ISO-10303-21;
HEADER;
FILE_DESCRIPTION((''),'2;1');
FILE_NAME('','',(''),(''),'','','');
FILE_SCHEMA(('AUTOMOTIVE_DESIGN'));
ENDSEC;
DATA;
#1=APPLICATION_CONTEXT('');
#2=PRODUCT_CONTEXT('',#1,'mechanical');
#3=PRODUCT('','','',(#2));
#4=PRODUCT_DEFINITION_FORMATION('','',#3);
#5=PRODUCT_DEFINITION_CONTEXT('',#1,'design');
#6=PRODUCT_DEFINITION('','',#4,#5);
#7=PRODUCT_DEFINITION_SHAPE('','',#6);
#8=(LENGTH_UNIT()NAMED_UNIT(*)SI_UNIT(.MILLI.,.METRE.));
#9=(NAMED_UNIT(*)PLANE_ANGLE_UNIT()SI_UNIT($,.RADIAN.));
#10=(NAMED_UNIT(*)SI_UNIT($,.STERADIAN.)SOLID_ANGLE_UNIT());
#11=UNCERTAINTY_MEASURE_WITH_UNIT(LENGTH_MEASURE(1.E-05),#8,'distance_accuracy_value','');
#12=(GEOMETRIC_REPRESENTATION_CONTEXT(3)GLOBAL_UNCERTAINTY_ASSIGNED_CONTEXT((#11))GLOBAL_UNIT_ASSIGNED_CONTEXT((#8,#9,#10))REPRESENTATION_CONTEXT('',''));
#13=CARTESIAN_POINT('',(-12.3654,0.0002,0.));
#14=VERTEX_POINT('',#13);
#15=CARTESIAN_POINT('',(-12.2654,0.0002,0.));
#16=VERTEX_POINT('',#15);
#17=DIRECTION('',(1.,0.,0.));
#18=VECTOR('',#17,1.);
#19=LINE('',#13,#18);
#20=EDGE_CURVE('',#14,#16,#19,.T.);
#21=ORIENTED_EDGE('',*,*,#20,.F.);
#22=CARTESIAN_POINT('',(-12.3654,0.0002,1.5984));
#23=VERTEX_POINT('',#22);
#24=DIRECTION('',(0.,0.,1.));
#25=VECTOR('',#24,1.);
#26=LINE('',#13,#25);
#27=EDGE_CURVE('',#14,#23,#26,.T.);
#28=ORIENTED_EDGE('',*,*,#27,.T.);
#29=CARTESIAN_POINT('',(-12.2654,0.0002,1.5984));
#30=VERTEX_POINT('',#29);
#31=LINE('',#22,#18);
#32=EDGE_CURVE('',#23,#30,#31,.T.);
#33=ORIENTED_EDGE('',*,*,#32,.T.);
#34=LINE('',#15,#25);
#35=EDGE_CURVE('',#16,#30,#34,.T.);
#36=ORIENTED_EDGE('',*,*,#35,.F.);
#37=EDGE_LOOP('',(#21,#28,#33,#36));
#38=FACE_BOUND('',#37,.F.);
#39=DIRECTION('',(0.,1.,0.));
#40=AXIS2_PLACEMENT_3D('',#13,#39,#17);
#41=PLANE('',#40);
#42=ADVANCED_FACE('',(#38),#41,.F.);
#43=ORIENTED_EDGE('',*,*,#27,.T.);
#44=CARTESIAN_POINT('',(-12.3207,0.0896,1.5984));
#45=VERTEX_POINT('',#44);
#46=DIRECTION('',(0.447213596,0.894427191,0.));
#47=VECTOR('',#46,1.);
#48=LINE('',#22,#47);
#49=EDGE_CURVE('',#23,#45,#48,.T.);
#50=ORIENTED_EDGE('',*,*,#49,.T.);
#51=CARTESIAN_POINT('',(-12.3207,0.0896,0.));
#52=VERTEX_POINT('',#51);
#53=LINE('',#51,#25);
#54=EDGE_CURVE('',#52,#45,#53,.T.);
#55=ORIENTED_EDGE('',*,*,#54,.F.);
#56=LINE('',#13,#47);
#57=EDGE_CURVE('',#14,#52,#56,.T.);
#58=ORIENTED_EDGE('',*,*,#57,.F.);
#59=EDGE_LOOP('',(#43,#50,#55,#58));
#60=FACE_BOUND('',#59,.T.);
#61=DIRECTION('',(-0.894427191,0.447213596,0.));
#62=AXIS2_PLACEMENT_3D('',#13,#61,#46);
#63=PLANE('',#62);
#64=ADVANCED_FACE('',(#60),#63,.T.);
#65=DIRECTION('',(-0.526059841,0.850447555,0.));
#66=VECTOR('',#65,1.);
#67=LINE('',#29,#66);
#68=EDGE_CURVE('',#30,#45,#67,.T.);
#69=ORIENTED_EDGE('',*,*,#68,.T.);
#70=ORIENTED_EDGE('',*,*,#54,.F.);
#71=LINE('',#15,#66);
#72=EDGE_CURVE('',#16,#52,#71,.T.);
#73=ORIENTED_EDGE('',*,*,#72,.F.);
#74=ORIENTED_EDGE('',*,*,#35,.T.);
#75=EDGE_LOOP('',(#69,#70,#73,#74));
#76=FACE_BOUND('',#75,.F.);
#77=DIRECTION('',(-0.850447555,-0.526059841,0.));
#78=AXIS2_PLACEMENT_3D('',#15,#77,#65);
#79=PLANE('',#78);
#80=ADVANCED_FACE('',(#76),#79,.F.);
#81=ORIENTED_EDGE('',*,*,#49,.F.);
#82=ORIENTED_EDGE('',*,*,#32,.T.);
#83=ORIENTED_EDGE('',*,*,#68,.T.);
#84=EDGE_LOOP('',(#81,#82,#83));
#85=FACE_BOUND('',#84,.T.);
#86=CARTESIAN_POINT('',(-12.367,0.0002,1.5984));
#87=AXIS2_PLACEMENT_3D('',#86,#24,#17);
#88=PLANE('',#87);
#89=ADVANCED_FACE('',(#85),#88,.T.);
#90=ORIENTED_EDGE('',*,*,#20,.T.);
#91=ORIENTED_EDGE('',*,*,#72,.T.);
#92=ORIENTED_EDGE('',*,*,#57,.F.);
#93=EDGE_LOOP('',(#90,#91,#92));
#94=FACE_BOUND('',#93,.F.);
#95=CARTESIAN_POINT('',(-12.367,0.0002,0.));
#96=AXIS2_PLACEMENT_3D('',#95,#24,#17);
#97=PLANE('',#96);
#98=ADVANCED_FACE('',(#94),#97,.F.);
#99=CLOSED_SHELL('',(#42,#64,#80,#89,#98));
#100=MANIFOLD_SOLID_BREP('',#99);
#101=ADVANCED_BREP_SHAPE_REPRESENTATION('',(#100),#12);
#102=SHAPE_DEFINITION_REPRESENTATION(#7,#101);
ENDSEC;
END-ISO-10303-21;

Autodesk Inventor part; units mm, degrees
ref_plane "YZ Plane" through (0, 0, 0) normal (1, 0, 0) x (0, 1, 0)
ref_plane "XZ Plane" through (0, 0, 0) normal (0, 1, 0) x (-1, 0, 0)
ref_plane "XY Plane" through (0, 0, 0) normal (0, 0, 1) x (1, 0, 0)
ref_plane "Plano de trabajo1" through (-12.367, 0.0002, 0) normal (0, 0, 1) x (1, -0.0000342, 0)
sketch "Boceto1" plane through (-12.367, 0.0002, 0) normal (0, 0, 1) x (1, -0.0000342, 0)
  line L0 (0.0016, 0) -> (0.0463, 0.0894) projected
  line L1 (0.0016, 0) -> (0.1016, 0) projected
  line L2 (0.1016, 0) -> (0.0463, 0.0894)
  point P0 (12.367, 0.0002)
extrude "Extrusión1" add sketch "Boceto1" along normal up to surface (1.5984 mm away)
